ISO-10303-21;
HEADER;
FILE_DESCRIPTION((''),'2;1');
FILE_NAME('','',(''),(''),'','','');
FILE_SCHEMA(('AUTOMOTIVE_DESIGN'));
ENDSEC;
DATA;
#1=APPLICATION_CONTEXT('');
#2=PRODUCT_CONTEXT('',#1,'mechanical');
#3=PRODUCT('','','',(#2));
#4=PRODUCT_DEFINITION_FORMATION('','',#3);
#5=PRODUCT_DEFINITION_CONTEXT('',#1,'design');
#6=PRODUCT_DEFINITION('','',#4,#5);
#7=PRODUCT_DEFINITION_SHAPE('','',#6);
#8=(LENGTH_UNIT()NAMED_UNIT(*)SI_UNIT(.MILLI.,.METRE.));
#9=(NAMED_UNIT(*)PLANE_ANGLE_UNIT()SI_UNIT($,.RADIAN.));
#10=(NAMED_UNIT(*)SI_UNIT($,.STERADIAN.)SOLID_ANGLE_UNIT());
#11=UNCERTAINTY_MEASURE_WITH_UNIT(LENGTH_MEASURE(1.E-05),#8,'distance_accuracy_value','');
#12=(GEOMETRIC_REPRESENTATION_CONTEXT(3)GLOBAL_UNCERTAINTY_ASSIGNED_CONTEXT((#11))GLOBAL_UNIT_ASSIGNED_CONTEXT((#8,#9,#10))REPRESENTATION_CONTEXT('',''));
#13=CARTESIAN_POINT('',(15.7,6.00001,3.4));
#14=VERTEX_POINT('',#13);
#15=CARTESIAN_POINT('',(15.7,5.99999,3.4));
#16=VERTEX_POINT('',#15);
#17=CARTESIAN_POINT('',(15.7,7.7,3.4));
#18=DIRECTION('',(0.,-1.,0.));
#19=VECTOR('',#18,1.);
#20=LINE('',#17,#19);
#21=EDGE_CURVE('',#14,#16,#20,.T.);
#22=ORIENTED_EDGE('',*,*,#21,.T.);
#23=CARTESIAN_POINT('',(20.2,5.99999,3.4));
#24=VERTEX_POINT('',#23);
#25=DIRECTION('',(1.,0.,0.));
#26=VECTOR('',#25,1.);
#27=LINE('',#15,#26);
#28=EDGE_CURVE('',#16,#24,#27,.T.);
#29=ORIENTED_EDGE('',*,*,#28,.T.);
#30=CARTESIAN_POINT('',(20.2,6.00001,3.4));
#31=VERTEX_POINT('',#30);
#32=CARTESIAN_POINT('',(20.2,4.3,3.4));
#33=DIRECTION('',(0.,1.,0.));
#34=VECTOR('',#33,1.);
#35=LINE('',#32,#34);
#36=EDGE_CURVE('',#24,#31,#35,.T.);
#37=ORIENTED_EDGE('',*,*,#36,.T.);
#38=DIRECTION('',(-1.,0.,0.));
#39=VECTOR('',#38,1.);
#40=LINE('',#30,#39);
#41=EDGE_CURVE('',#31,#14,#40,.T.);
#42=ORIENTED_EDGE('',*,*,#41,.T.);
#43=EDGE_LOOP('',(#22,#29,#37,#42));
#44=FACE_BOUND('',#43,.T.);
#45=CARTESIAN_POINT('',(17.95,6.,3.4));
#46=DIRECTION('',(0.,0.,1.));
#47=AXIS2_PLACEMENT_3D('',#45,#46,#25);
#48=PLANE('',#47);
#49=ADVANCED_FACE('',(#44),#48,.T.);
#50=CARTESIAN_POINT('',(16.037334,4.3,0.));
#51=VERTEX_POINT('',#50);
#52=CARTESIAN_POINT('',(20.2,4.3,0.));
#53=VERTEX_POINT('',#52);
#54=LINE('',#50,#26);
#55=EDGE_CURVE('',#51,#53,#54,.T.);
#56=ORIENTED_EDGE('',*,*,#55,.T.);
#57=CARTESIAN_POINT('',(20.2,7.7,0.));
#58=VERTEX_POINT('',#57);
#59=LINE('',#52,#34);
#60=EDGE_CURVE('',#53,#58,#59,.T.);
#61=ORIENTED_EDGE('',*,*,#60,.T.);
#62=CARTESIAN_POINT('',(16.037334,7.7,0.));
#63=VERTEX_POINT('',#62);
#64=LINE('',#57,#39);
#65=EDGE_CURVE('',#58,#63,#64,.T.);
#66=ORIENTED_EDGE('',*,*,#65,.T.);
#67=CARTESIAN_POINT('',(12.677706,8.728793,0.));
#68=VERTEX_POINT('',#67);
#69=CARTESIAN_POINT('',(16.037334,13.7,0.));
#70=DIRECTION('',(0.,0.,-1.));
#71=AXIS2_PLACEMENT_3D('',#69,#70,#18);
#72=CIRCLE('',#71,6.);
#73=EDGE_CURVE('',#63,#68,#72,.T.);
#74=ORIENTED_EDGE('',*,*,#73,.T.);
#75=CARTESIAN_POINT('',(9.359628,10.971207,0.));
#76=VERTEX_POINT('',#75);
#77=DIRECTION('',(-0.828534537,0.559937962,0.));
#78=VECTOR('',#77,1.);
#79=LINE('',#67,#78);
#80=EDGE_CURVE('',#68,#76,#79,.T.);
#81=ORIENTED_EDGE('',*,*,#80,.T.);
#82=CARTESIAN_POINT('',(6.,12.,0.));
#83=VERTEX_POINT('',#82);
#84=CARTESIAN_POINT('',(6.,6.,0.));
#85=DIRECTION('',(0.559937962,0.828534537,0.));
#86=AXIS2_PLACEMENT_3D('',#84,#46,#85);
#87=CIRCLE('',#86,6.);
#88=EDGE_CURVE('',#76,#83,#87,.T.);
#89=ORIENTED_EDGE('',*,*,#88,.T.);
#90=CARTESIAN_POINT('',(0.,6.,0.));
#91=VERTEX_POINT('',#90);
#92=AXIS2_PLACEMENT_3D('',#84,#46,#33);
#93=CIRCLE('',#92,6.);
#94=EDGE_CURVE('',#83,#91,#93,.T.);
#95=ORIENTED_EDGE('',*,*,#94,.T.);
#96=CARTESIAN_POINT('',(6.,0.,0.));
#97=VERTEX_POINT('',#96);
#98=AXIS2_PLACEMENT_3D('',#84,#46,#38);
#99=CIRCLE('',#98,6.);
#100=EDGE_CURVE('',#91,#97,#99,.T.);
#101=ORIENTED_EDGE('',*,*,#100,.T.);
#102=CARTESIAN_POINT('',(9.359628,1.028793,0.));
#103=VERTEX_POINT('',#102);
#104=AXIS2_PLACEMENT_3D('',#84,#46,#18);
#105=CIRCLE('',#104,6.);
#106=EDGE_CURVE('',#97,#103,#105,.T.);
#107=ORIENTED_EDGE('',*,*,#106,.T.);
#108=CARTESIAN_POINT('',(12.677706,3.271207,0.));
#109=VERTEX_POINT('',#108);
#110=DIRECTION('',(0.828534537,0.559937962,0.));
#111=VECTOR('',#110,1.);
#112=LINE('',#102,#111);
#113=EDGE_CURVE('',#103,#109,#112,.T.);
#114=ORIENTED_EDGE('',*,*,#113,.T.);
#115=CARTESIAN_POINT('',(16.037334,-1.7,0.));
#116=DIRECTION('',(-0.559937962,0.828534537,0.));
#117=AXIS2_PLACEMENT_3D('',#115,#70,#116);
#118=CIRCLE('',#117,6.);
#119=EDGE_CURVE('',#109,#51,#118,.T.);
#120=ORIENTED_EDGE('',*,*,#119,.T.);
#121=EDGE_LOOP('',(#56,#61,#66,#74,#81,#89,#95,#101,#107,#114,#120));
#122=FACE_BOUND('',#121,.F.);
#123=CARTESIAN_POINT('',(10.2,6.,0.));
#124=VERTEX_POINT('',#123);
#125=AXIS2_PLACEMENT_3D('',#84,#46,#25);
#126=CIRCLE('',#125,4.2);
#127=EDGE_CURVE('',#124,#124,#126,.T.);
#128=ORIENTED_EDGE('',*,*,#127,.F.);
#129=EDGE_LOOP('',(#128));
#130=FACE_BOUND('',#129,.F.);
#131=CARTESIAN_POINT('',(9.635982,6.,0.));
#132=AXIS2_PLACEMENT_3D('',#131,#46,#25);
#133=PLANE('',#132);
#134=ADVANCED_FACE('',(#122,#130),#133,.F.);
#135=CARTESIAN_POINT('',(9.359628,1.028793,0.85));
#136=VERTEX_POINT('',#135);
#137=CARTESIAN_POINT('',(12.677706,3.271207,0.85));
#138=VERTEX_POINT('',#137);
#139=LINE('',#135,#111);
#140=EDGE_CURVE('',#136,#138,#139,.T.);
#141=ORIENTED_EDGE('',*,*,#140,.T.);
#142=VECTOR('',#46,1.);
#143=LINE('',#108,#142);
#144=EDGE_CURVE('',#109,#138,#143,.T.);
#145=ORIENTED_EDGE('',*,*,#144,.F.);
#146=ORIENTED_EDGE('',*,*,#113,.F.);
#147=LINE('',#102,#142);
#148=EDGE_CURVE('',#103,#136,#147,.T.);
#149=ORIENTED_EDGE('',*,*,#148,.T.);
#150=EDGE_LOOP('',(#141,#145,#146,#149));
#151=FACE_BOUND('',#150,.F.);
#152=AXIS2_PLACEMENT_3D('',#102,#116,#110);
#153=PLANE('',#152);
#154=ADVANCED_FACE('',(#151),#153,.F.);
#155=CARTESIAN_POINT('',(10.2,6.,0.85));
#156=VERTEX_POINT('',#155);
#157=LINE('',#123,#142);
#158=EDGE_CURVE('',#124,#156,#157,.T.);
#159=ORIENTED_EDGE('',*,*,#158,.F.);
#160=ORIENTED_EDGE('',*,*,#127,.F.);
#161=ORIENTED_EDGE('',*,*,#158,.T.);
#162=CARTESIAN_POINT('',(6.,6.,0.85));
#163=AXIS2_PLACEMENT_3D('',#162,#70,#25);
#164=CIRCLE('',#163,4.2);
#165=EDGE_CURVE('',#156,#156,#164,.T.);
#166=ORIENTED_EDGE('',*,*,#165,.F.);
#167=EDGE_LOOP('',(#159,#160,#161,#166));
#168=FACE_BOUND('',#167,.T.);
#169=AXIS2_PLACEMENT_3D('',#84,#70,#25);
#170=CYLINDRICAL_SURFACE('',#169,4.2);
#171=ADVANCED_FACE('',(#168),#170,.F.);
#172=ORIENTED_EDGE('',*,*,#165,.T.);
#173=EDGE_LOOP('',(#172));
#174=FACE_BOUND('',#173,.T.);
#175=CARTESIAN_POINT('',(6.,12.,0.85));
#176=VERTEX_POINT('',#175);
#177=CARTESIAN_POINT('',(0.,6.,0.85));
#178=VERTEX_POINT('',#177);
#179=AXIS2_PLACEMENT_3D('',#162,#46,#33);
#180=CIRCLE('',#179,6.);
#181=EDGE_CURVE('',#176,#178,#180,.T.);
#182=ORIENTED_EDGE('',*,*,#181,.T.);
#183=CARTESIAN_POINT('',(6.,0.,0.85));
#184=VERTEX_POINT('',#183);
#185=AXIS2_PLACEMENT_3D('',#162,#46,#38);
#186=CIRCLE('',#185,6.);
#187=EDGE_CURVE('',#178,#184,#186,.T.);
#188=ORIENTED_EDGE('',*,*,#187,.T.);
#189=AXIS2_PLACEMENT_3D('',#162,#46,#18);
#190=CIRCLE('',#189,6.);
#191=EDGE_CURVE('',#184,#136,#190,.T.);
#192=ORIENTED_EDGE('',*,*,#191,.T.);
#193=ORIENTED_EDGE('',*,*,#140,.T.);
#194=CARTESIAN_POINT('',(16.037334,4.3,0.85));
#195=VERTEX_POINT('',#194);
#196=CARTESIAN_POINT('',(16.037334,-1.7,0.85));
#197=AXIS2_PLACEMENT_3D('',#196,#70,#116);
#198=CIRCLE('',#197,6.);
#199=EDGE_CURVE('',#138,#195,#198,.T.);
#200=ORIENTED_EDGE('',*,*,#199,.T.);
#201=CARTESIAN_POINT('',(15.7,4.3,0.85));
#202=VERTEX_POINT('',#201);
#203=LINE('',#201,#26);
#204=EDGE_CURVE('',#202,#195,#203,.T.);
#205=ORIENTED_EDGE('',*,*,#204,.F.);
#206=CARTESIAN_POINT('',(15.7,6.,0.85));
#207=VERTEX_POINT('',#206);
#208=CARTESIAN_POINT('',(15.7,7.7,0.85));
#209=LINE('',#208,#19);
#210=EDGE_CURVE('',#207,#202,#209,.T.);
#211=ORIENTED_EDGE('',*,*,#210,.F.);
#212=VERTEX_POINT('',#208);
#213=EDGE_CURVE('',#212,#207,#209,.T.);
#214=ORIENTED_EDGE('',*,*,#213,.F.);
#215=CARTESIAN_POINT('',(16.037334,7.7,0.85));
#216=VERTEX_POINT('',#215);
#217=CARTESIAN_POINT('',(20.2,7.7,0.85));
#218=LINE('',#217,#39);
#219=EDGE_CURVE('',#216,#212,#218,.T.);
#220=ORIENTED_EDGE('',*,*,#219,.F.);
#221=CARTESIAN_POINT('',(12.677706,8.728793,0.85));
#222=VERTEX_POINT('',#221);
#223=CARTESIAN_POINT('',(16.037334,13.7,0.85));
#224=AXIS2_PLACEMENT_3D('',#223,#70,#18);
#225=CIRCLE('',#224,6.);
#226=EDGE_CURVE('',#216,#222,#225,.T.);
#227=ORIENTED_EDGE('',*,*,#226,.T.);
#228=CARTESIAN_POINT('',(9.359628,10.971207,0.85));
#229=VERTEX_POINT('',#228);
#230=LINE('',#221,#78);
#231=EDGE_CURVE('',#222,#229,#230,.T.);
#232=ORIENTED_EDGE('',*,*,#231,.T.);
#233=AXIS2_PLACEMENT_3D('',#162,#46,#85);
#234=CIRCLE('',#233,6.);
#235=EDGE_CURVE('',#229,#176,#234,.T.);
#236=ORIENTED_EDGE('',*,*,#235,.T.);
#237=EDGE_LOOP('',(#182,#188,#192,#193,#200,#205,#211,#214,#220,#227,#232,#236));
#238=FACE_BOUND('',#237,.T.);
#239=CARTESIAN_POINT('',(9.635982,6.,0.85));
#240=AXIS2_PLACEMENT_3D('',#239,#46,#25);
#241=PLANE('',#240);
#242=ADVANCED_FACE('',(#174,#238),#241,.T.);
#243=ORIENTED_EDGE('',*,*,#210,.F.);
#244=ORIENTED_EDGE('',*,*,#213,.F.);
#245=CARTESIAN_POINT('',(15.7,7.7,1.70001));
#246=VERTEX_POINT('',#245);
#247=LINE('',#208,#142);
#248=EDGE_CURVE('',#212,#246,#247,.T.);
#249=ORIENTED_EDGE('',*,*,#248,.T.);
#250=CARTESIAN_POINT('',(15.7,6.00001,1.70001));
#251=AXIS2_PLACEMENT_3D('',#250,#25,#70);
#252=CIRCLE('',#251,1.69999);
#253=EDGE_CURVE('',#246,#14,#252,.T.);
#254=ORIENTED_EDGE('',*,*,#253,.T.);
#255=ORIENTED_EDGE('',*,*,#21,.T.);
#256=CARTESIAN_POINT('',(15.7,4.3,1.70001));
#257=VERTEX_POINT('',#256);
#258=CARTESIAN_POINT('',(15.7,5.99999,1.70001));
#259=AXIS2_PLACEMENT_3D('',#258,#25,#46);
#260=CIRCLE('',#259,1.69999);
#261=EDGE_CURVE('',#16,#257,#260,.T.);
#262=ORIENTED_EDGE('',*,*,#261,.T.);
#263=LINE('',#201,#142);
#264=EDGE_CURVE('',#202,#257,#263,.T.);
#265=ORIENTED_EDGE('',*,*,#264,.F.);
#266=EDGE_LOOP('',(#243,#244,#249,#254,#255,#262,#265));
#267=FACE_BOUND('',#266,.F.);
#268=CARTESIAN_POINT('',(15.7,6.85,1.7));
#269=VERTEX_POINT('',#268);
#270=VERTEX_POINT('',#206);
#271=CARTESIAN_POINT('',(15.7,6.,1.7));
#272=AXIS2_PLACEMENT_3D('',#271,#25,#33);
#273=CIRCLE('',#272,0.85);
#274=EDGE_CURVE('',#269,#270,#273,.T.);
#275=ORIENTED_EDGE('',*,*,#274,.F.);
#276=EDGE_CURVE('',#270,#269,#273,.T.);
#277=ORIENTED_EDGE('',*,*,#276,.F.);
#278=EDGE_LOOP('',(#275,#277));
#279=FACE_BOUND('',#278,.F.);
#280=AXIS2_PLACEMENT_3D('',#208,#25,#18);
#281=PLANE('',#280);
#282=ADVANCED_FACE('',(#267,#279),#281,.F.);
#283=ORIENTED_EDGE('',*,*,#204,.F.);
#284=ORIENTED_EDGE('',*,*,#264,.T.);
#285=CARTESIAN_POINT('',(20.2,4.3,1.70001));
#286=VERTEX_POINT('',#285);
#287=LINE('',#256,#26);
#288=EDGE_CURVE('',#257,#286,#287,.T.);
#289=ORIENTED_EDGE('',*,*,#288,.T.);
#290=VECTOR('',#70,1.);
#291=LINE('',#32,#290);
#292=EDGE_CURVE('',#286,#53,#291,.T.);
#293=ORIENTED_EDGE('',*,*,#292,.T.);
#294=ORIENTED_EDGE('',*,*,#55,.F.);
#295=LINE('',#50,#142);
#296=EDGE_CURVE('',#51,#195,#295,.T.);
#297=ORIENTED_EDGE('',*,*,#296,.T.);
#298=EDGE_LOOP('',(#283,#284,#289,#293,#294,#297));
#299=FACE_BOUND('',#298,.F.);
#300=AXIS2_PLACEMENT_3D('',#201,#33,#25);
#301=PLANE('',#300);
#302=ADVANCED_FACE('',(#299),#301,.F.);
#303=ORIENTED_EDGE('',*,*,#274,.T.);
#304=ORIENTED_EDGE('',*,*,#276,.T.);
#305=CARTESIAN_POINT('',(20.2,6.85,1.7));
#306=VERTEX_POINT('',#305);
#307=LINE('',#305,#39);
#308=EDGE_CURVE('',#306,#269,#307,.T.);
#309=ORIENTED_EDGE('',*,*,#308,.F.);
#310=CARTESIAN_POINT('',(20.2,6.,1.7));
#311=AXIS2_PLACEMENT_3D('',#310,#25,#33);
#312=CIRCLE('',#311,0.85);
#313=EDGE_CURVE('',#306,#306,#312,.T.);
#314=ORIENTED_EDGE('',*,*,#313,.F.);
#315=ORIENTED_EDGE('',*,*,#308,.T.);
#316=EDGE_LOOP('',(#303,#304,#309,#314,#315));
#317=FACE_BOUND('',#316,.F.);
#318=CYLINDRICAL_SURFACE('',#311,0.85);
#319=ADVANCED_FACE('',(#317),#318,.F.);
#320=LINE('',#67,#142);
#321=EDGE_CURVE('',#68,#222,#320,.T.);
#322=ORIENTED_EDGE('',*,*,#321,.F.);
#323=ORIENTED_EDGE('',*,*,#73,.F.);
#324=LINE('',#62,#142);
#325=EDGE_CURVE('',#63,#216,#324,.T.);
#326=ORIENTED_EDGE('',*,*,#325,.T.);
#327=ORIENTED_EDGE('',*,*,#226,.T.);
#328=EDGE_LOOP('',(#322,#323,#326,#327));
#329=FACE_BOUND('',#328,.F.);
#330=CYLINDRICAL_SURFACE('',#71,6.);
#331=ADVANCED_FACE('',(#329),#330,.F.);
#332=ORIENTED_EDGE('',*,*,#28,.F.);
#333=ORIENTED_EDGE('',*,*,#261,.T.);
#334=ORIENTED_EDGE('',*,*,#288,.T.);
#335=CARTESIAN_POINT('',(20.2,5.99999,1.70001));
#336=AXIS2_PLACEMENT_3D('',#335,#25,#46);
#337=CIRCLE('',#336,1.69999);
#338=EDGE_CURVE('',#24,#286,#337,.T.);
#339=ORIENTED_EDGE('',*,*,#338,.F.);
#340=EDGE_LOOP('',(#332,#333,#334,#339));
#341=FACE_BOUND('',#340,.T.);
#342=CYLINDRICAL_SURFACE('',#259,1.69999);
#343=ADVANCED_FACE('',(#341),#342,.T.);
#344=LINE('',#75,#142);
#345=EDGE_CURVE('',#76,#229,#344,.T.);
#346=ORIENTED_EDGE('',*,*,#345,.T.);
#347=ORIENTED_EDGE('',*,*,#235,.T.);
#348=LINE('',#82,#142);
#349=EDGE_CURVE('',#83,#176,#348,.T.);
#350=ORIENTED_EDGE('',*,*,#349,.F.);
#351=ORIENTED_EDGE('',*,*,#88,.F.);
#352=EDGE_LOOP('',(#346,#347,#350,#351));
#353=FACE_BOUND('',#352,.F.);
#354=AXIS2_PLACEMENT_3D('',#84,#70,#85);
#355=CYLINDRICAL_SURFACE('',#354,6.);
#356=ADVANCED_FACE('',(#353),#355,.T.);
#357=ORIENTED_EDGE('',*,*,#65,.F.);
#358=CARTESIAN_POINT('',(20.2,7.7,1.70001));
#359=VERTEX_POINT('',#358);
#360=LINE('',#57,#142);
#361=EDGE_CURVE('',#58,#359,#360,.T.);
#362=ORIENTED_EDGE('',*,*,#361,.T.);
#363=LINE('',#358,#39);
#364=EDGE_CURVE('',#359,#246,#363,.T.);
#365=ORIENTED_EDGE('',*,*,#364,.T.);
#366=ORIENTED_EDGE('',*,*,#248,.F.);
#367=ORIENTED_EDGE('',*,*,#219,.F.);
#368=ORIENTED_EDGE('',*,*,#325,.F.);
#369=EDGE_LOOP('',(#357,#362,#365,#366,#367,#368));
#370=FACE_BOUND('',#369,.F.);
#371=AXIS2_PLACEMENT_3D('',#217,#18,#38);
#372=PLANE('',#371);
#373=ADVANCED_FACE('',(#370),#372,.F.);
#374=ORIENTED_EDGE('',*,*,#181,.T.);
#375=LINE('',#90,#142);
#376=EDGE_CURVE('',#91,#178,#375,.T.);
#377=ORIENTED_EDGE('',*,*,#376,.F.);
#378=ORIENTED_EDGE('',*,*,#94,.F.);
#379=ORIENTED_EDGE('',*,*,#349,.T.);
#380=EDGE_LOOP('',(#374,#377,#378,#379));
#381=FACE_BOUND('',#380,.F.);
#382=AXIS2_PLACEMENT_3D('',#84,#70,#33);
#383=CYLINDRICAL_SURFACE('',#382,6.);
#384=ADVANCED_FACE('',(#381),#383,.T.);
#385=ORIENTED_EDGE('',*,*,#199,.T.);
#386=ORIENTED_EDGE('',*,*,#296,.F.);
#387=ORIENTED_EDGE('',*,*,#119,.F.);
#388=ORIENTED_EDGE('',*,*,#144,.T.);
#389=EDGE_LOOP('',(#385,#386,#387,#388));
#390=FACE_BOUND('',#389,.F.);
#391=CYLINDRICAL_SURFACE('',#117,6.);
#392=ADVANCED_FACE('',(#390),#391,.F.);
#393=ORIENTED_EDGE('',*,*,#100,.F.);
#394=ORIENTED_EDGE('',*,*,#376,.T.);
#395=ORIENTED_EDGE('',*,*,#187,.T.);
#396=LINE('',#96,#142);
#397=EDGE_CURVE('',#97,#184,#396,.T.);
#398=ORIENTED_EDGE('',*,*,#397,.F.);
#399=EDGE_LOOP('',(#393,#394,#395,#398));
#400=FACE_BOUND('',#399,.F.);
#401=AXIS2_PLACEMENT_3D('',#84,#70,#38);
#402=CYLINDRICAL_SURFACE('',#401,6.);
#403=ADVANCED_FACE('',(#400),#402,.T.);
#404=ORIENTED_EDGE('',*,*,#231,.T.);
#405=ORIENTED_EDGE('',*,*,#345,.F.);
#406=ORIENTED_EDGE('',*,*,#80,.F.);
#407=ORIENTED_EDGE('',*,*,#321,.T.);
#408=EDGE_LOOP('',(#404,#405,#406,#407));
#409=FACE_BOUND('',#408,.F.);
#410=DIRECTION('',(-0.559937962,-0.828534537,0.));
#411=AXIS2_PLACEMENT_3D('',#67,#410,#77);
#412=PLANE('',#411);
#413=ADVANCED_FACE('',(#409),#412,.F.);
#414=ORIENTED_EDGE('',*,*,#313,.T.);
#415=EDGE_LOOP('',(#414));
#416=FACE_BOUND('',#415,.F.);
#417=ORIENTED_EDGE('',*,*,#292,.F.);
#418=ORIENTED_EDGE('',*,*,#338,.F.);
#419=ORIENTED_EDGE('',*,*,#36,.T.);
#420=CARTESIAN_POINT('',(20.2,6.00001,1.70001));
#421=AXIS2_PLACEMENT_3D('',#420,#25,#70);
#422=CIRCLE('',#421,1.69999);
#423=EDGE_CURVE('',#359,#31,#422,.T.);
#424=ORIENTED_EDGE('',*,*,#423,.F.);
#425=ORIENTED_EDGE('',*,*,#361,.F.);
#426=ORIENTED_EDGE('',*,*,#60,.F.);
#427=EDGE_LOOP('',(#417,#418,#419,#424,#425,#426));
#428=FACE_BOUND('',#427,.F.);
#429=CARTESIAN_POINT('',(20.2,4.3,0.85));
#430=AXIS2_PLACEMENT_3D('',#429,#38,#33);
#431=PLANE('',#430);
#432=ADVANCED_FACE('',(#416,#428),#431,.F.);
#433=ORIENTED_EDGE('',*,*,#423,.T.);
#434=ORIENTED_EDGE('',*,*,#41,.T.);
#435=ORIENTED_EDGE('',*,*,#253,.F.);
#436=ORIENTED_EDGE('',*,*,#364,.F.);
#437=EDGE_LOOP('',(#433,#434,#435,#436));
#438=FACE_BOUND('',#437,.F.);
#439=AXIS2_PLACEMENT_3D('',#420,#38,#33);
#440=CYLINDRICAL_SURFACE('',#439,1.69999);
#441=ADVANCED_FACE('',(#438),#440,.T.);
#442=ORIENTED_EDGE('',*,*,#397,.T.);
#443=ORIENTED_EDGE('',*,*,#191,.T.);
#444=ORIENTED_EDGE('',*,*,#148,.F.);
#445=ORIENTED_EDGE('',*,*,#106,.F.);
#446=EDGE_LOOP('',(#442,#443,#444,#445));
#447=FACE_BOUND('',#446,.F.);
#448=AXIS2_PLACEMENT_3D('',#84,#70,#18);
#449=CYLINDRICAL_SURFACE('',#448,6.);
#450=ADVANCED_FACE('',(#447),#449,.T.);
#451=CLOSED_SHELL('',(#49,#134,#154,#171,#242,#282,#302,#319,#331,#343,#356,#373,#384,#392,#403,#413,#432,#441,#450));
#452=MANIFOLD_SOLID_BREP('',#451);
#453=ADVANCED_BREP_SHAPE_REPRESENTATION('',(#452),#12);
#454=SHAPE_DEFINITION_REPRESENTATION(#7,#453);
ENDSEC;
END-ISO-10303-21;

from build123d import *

# Parameters (mm, degrees)
F0_R     = 4.2
F1_DEPTH = 0.85
F3_DEPTH = 2.55
F4_R     = 1.69999
F5_R     = 0.85
F6_DEPTH = 25


# Not quite as in the source:
# - a fillet or chamfer is up to 0.001 mm smaller than in the source, because OpenCascade refuses the exact size


with BuildPart() as f1:
    # F0 (on Top) → F1 (new body)
    with BuildSketch(Plane.XY):
        with BuildLine():
            Line((16.0373335058, 4.3), (20.2, 4.3))
            Line((20.2, 4.3), (20.2, 7.7))
            Line((20.2, 7.7), (16.0373335058, 7.7))
            ThreePointArc((16.0373335058, 7.7), (14.2805243712, 7.9629605488), (12.6777057346, 8.7287927785))
            Line((12.6777057346, 8.7287927785), (9.3596277711, 10.9712072215))
            ThreePointArc((9.3596277711, 10.9712072215), (7.7568091346, 11.7370394512), (6, 12))
            ThreePointArc((6, 12), (1.7573593129, 10.2426406871), (0, 6))
            ThreePointArc((0, 6), (1.7573593129, 1.7573593129), (6, 0))
            ThreePointArc((6, 0), (7.7568091346, 0.2629605488), (9.3596277711, 1.0287927785))
            Line((9.3596277711, 1.0287927785), (12.6777057346, 3.2712072215))
            ThreePointArc((12.6777057346, 3.2712072215), (14.2805243712, 4.0370394512), (16.0373335058, 4.3))
        make_face()
        with Locations((6, 6)):
            Circle(F0_R, mode=Mode.SUBTRACT)
    extrude(amount=F1_DEPTH)

    # F2 (on face) → F3 (join)
    with BuildSketch(Plane.XY.offset(0.85)):
        Polygon((20.2, 4.3), (20.2, 7.7), (16.0373335058, 7.7), (15.7, 7.7), (15.7, 4.3), (16.0373335058, 4.3), align=None)
    extrude(amount=F3_DEPTH)

    # F4 (radius 1.7 in the source; OpenCascade refuses exactly that, so slightly less here)
    f4_edges = [f1.edges().sort_by_distance(p)[0] for p in [
        (17.95, 7.7, 3.4),
        (17.95, 4.3, 3.4),
    ]]
    fillet(f4_edges, radius=F4_R)

    # F5 (on face) → F6 (cut)
    with BuildSketch(Plane.YZ.offset(20.2)):
        with Locations((6, 1.7)):
            Circle(F5_R)
    extrude(amount=-F6_DEPTH, mode=Mode.SUBTRACT)


solid = f1.part
